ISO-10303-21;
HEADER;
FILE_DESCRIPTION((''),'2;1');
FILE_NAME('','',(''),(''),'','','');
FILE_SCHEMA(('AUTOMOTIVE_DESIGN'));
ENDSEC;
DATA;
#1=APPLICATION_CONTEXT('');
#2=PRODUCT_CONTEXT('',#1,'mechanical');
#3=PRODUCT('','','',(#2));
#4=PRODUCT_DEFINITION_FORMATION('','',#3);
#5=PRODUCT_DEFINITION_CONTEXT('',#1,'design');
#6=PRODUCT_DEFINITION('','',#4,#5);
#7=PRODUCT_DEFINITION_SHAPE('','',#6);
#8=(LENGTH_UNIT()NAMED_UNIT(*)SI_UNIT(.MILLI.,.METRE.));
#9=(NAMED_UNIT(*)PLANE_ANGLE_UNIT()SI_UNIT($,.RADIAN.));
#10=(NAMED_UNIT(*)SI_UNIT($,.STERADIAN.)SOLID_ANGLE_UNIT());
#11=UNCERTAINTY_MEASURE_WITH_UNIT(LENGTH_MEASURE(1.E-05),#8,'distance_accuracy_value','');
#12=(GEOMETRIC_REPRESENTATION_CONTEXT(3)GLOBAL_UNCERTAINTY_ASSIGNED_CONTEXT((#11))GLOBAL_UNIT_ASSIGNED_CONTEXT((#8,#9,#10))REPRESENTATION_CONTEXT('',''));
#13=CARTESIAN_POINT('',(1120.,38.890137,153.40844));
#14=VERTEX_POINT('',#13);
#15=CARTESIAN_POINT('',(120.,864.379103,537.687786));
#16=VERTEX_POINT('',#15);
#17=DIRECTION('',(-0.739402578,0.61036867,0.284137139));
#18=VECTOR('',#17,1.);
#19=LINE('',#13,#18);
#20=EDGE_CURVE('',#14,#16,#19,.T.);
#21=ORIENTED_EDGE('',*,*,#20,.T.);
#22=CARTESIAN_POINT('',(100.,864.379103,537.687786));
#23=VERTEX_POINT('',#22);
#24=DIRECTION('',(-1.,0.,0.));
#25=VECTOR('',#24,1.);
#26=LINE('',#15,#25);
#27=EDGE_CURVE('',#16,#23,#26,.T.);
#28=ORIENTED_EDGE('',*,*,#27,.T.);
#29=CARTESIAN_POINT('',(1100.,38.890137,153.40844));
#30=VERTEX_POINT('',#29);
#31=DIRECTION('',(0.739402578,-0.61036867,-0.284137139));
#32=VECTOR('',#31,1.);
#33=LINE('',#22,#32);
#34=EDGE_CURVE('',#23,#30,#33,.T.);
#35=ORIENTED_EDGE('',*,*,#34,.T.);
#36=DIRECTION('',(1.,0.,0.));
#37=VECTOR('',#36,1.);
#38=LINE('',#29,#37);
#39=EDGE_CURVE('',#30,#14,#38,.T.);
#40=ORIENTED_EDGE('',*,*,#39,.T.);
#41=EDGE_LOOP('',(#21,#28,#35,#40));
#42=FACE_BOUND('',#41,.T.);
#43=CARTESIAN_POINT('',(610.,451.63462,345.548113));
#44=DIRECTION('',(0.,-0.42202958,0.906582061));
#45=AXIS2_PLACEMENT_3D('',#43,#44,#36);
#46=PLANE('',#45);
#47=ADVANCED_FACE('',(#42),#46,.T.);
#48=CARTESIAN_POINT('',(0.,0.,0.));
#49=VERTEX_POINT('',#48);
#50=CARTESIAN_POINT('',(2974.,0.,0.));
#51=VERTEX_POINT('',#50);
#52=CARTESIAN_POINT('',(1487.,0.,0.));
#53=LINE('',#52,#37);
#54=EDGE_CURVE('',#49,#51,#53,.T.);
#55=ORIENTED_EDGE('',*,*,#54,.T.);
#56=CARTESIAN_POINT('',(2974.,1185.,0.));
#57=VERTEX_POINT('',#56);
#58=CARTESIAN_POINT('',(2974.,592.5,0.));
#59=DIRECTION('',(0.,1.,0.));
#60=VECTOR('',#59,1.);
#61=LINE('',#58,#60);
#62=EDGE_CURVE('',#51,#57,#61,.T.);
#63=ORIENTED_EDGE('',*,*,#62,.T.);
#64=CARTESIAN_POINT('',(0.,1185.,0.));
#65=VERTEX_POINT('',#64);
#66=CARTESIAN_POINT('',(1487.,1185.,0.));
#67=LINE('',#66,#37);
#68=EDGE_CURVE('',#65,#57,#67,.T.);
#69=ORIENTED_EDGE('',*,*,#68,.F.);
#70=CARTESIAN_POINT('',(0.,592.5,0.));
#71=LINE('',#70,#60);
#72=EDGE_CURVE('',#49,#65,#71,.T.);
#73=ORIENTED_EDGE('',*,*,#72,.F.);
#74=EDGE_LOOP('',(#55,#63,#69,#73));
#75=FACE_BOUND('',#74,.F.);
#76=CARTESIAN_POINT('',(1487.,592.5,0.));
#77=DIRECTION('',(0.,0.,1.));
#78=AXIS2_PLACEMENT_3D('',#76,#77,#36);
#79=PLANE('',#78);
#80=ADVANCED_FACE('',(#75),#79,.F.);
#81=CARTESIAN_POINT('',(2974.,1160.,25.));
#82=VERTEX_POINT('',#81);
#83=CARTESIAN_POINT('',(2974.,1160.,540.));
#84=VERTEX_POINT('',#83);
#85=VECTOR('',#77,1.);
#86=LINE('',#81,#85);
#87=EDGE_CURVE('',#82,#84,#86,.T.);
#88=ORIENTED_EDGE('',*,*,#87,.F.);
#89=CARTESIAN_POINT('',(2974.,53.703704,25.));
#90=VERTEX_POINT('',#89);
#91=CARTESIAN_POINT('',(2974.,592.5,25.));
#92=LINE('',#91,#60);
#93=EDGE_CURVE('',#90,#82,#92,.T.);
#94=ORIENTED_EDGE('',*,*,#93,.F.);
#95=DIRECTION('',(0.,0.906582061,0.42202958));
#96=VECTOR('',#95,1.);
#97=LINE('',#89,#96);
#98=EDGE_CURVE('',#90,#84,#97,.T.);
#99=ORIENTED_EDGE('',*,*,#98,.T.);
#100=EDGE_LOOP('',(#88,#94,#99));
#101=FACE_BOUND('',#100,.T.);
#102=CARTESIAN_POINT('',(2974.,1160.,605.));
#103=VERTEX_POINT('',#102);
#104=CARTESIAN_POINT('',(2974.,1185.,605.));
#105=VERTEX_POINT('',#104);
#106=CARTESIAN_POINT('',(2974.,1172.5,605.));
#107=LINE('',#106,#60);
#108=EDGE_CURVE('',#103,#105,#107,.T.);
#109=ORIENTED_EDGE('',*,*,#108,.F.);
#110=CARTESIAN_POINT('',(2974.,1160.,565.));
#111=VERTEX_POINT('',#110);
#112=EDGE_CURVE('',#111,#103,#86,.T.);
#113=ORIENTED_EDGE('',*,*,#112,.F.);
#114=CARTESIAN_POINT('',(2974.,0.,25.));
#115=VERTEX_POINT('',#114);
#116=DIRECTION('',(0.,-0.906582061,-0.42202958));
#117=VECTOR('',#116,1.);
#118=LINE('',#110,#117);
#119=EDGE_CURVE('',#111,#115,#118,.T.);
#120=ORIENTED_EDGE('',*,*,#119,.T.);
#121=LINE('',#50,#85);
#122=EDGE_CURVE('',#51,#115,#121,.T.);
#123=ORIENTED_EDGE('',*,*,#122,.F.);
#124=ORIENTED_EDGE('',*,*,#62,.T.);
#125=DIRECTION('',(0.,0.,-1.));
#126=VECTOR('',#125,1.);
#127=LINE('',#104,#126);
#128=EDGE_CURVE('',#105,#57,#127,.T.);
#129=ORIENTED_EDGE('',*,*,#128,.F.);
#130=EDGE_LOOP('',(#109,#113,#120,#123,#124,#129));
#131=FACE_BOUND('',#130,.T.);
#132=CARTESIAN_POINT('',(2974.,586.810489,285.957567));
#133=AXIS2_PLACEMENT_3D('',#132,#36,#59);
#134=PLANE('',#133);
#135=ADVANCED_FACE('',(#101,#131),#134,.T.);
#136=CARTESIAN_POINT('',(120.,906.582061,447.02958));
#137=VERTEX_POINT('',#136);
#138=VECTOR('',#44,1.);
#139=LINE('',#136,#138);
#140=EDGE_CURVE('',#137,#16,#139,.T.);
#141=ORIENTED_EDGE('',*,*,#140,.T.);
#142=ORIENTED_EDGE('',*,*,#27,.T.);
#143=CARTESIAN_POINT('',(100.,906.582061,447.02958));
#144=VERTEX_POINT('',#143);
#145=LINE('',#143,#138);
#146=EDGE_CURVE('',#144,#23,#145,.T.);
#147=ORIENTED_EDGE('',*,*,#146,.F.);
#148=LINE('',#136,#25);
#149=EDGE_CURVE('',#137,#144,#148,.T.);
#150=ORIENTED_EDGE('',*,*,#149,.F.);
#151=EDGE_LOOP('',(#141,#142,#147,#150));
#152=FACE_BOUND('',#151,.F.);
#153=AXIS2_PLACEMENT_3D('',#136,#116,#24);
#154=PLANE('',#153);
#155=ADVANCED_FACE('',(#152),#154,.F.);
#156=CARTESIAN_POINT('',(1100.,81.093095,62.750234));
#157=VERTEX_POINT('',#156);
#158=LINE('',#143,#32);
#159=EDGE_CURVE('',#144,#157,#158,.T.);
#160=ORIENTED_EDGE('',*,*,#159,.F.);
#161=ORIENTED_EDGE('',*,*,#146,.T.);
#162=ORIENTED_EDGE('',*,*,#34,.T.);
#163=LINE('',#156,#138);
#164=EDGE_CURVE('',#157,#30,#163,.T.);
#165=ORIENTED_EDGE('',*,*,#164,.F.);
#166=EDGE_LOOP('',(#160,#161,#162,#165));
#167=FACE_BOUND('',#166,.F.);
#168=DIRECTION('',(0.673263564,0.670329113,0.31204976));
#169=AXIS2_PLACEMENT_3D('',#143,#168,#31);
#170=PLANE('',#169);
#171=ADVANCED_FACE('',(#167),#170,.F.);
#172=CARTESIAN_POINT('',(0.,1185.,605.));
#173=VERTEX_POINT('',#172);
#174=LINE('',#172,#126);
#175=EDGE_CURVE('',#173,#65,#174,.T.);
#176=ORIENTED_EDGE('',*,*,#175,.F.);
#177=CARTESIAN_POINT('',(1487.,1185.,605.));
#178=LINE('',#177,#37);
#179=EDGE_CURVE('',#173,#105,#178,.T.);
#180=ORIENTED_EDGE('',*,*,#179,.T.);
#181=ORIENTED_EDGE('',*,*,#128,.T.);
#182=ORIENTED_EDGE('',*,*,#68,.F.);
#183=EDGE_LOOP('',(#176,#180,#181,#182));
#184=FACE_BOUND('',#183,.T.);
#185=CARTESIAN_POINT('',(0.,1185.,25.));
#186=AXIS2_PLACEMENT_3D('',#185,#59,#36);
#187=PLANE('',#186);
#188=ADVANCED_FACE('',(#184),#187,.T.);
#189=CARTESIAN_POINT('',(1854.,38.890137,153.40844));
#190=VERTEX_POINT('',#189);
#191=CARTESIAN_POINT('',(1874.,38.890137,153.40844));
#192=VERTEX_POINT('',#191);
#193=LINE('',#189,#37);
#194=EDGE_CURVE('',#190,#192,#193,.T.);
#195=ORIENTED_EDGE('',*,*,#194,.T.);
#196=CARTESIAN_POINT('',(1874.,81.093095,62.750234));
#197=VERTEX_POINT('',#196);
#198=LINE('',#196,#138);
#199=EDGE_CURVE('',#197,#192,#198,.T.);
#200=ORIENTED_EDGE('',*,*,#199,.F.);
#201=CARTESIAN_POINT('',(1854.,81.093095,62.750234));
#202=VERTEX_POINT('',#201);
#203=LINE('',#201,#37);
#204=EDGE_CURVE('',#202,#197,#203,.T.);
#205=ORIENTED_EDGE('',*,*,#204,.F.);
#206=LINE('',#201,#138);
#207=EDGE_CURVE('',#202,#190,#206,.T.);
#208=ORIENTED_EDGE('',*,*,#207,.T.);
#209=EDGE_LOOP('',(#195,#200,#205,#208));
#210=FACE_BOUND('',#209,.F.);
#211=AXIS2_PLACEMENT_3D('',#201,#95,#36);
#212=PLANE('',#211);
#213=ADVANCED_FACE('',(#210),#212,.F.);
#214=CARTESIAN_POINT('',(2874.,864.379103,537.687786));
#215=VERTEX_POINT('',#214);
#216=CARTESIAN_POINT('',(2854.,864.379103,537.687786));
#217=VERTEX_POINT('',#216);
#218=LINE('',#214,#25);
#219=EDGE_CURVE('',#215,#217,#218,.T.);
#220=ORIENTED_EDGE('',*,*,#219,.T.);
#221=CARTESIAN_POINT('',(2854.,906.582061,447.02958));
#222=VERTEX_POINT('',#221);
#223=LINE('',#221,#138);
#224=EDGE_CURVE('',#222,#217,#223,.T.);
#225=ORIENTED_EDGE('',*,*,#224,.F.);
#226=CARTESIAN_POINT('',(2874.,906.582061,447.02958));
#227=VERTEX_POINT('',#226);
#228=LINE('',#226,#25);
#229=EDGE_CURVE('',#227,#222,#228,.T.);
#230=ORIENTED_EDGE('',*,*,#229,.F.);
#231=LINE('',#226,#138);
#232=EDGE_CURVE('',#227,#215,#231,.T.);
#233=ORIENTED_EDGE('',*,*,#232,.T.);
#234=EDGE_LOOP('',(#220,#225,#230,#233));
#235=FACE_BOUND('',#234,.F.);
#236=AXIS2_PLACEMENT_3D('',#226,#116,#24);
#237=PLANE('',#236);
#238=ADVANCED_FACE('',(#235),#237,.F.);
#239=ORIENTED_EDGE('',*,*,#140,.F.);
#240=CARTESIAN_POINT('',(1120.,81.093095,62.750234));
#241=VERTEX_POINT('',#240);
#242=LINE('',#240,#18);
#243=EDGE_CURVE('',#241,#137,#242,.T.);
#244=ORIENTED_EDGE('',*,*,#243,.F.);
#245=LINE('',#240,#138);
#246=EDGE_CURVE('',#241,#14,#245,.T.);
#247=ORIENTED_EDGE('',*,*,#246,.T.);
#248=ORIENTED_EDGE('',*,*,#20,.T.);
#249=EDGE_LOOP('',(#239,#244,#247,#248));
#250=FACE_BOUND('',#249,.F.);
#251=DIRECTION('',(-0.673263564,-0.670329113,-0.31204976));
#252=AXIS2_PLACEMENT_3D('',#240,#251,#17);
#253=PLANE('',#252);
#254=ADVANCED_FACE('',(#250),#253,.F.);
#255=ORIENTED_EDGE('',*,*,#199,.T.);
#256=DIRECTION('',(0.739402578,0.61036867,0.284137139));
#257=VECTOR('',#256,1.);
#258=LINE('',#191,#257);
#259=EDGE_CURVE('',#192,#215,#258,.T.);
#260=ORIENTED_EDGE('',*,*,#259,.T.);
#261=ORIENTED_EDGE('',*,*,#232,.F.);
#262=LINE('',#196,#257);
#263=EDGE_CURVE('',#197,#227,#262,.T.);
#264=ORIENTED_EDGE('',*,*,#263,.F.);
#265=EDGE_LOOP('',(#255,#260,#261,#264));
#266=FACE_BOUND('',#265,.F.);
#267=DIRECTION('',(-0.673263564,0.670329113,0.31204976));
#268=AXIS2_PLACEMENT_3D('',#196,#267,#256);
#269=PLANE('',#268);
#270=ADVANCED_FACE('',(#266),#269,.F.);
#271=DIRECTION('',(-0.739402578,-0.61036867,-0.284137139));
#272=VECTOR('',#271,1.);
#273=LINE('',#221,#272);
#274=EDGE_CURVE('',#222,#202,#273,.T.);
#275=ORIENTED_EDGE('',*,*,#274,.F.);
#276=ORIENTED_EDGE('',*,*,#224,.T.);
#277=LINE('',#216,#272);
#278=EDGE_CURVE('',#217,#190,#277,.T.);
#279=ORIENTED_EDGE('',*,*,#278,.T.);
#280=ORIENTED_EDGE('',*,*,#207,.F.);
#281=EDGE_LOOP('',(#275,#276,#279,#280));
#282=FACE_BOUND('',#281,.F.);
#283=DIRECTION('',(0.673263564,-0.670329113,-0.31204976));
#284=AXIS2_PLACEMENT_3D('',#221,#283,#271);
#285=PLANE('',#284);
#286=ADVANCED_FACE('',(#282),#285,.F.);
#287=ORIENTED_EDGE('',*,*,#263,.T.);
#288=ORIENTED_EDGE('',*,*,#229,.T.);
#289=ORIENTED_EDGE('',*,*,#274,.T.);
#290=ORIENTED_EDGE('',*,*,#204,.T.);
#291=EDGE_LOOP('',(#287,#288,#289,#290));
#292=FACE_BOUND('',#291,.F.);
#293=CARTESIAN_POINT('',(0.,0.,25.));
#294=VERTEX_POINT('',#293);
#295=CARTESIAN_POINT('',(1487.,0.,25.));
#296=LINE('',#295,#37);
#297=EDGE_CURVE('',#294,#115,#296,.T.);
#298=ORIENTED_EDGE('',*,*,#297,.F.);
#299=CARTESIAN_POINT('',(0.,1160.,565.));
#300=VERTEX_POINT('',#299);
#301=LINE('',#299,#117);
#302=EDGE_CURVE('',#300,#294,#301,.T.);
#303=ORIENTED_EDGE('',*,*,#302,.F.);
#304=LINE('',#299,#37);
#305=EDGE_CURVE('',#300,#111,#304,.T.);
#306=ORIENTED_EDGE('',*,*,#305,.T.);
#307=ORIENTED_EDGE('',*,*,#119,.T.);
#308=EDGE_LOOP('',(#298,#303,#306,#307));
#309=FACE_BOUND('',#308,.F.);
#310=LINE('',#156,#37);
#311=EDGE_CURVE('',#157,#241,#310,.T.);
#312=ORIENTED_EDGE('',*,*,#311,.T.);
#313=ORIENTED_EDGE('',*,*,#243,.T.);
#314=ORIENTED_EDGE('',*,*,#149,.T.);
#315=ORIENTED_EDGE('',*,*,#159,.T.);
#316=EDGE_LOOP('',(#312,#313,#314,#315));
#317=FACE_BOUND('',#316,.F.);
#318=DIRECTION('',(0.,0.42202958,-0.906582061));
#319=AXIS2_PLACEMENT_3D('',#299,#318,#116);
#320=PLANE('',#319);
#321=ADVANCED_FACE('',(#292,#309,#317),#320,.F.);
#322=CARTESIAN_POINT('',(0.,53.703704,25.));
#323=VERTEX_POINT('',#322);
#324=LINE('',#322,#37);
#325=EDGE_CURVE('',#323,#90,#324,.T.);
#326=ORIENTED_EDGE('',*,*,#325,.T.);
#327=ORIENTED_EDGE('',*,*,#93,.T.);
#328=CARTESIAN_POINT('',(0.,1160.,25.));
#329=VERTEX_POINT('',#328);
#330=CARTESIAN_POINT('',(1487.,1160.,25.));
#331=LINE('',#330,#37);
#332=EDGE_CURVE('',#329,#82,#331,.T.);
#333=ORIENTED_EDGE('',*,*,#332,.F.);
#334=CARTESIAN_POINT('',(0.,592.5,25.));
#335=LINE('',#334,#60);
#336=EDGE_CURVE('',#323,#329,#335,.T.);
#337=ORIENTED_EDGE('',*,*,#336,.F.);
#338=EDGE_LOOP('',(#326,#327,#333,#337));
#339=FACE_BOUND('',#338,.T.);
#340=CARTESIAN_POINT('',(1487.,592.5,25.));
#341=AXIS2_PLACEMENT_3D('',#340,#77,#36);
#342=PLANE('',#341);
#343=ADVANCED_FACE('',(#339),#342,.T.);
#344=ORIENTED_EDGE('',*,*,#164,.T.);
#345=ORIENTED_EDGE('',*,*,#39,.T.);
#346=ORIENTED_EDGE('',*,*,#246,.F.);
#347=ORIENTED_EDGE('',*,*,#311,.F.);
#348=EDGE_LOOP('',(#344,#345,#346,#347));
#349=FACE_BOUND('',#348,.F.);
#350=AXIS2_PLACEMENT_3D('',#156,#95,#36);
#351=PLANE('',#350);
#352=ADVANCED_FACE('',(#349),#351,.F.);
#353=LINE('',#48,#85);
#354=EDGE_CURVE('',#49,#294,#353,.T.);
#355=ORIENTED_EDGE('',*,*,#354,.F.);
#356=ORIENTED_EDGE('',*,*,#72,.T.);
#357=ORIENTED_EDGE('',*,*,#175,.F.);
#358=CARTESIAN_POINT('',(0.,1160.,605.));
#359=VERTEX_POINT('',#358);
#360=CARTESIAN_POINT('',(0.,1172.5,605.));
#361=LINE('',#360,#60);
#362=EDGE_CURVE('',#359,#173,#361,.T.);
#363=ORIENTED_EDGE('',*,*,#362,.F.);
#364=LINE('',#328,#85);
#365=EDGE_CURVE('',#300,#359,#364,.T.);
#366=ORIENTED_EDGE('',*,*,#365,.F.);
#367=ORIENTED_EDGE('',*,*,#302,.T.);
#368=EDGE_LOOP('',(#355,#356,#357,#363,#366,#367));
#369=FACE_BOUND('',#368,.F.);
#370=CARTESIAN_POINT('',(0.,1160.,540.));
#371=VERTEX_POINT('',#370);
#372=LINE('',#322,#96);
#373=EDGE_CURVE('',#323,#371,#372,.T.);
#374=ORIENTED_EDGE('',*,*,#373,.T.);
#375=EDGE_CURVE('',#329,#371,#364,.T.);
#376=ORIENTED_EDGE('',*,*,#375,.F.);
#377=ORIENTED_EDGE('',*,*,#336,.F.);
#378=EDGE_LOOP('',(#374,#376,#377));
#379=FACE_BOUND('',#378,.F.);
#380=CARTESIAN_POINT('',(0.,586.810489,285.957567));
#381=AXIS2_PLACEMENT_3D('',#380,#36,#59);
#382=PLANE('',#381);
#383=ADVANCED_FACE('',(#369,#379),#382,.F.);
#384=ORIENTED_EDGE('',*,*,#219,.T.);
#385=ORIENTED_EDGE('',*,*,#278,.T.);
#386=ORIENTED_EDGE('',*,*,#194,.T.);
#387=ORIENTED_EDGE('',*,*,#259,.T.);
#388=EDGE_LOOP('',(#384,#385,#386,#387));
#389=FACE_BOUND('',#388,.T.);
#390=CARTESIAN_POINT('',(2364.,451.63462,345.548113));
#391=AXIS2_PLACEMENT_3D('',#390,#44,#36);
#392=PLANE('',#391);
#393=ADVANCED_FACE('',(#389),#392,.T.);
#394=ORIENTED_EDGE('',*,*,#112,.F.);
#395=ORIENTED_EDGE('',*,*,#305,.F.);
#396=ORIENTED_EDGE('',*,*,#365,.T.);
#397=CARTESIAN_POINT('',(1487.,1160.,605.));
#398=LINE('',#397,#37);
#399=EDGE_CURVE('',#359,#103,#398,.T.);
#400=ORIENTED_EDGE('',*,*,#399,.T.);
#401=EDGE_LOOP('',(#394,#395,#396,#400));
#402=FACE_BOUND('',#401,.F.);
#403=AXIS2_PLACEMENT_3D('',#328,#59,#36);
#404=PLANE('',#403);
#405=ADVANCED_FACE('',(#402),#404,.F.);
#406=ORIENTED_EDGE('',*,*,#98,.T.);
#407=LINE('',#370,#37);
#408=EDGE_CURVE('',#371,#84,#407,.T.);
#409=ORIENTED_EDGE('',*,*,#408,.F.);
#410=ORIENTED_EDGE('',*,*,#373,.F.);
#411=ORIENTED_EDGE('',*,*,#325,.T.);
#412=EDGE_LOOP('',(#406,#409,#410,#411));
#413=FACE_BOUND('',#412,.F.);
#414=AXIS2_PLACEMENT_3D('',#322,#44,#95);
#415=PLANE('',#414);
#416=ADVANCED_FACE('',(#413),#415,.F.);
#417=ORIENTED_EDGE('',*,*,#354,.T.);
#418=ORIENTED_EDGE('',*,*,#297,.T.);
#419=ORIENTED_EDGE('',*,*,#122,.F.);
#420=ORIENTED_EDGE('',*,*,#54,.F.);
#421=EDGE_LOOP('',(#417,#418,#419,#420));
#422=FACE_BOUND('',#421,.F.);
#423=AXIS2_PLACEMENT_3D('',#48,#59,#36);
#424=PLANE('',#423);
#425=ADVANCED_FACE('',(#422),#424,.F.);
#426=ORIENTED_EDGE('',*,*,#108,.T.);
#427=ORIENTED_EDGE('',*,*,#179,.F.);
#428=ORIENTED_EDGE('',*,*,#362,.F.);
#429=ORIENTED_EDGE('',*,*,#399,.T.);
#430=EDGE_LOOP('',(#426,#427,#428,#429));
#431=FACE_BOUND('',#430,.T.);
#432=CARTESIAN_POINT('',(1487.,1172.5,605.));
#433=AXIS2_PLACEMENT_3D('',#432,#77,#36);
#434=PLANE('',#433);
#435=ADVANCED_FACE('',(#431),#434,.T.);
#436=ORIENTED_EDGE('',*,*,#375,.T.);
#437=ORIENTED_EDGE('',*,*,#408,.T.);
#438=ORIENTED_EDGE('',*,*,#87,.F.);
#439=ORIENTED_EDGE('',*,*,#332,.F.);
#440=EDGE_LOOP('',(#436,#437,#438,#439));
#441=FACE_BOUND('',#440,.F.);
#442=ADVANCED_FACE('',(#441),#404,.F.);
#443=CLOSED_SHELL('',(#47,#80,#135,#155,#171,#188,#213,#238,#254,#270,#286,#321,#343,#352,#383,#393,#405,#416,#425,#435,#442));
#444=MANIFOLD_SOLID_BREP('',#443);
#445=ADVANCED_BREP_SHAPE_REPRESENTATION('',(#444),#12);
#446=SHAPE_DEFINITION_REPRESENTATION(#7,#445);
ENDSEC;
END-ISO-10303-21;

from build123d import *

# Parameters (mm, degrees)
F1_W     = 2974
F1_H     = 1185
F2_DEPTH = 25
F3_W     = 2974
F3_H     = 25
F4_DEPTH = 580
F6_DEPTH = 2974
F8_DEPTH = 100


with BuildPart() as f2:
    # F1 (on Top) → F2 (new body)
    with BuildSketch(Plane.XY):
        with Locations((1487, 592.5)):
            Rectangle(F1_W, F1_H)
    extrude(amount=F2_DEPTH)

    # F3 (on face) → F4 (join)
    with BuildSketch(Plane.XY.offset(25)):
        with Locations((1487, 1172.5)):
            Rectangle(F3_W, F3_H)
    extrude(amount=F4_DEPTH)

    # F5 (on Right) → F6 (join)
    with BuildSketch(Plane.YZ):
        Polygon((1160, 540), (1160, 565), (0, 25), (53.7037037037, 25), align=None)
    extrude(amount=F6_DEPTH)

    # F7 (on face) → F8 (join)
    with BuildSketch(Plane(origin=(0, -9.5651111654, 20.5472758368), x_dir=(1, 0, 0), z_dir=(0, -0.4220295802, 0.9065820611))):
        Polygon((120, 1010.5507395039), (100, 1010.5507395039), (1100, 100), (1120, 100), align=None)
        Polygon((1874, 100), (2874, 1010.5507395039), (2854, 1010.5507395039), (1854, 100), align=None)
    extrude(amount=F8_DEPTH)


solid = f2.part
